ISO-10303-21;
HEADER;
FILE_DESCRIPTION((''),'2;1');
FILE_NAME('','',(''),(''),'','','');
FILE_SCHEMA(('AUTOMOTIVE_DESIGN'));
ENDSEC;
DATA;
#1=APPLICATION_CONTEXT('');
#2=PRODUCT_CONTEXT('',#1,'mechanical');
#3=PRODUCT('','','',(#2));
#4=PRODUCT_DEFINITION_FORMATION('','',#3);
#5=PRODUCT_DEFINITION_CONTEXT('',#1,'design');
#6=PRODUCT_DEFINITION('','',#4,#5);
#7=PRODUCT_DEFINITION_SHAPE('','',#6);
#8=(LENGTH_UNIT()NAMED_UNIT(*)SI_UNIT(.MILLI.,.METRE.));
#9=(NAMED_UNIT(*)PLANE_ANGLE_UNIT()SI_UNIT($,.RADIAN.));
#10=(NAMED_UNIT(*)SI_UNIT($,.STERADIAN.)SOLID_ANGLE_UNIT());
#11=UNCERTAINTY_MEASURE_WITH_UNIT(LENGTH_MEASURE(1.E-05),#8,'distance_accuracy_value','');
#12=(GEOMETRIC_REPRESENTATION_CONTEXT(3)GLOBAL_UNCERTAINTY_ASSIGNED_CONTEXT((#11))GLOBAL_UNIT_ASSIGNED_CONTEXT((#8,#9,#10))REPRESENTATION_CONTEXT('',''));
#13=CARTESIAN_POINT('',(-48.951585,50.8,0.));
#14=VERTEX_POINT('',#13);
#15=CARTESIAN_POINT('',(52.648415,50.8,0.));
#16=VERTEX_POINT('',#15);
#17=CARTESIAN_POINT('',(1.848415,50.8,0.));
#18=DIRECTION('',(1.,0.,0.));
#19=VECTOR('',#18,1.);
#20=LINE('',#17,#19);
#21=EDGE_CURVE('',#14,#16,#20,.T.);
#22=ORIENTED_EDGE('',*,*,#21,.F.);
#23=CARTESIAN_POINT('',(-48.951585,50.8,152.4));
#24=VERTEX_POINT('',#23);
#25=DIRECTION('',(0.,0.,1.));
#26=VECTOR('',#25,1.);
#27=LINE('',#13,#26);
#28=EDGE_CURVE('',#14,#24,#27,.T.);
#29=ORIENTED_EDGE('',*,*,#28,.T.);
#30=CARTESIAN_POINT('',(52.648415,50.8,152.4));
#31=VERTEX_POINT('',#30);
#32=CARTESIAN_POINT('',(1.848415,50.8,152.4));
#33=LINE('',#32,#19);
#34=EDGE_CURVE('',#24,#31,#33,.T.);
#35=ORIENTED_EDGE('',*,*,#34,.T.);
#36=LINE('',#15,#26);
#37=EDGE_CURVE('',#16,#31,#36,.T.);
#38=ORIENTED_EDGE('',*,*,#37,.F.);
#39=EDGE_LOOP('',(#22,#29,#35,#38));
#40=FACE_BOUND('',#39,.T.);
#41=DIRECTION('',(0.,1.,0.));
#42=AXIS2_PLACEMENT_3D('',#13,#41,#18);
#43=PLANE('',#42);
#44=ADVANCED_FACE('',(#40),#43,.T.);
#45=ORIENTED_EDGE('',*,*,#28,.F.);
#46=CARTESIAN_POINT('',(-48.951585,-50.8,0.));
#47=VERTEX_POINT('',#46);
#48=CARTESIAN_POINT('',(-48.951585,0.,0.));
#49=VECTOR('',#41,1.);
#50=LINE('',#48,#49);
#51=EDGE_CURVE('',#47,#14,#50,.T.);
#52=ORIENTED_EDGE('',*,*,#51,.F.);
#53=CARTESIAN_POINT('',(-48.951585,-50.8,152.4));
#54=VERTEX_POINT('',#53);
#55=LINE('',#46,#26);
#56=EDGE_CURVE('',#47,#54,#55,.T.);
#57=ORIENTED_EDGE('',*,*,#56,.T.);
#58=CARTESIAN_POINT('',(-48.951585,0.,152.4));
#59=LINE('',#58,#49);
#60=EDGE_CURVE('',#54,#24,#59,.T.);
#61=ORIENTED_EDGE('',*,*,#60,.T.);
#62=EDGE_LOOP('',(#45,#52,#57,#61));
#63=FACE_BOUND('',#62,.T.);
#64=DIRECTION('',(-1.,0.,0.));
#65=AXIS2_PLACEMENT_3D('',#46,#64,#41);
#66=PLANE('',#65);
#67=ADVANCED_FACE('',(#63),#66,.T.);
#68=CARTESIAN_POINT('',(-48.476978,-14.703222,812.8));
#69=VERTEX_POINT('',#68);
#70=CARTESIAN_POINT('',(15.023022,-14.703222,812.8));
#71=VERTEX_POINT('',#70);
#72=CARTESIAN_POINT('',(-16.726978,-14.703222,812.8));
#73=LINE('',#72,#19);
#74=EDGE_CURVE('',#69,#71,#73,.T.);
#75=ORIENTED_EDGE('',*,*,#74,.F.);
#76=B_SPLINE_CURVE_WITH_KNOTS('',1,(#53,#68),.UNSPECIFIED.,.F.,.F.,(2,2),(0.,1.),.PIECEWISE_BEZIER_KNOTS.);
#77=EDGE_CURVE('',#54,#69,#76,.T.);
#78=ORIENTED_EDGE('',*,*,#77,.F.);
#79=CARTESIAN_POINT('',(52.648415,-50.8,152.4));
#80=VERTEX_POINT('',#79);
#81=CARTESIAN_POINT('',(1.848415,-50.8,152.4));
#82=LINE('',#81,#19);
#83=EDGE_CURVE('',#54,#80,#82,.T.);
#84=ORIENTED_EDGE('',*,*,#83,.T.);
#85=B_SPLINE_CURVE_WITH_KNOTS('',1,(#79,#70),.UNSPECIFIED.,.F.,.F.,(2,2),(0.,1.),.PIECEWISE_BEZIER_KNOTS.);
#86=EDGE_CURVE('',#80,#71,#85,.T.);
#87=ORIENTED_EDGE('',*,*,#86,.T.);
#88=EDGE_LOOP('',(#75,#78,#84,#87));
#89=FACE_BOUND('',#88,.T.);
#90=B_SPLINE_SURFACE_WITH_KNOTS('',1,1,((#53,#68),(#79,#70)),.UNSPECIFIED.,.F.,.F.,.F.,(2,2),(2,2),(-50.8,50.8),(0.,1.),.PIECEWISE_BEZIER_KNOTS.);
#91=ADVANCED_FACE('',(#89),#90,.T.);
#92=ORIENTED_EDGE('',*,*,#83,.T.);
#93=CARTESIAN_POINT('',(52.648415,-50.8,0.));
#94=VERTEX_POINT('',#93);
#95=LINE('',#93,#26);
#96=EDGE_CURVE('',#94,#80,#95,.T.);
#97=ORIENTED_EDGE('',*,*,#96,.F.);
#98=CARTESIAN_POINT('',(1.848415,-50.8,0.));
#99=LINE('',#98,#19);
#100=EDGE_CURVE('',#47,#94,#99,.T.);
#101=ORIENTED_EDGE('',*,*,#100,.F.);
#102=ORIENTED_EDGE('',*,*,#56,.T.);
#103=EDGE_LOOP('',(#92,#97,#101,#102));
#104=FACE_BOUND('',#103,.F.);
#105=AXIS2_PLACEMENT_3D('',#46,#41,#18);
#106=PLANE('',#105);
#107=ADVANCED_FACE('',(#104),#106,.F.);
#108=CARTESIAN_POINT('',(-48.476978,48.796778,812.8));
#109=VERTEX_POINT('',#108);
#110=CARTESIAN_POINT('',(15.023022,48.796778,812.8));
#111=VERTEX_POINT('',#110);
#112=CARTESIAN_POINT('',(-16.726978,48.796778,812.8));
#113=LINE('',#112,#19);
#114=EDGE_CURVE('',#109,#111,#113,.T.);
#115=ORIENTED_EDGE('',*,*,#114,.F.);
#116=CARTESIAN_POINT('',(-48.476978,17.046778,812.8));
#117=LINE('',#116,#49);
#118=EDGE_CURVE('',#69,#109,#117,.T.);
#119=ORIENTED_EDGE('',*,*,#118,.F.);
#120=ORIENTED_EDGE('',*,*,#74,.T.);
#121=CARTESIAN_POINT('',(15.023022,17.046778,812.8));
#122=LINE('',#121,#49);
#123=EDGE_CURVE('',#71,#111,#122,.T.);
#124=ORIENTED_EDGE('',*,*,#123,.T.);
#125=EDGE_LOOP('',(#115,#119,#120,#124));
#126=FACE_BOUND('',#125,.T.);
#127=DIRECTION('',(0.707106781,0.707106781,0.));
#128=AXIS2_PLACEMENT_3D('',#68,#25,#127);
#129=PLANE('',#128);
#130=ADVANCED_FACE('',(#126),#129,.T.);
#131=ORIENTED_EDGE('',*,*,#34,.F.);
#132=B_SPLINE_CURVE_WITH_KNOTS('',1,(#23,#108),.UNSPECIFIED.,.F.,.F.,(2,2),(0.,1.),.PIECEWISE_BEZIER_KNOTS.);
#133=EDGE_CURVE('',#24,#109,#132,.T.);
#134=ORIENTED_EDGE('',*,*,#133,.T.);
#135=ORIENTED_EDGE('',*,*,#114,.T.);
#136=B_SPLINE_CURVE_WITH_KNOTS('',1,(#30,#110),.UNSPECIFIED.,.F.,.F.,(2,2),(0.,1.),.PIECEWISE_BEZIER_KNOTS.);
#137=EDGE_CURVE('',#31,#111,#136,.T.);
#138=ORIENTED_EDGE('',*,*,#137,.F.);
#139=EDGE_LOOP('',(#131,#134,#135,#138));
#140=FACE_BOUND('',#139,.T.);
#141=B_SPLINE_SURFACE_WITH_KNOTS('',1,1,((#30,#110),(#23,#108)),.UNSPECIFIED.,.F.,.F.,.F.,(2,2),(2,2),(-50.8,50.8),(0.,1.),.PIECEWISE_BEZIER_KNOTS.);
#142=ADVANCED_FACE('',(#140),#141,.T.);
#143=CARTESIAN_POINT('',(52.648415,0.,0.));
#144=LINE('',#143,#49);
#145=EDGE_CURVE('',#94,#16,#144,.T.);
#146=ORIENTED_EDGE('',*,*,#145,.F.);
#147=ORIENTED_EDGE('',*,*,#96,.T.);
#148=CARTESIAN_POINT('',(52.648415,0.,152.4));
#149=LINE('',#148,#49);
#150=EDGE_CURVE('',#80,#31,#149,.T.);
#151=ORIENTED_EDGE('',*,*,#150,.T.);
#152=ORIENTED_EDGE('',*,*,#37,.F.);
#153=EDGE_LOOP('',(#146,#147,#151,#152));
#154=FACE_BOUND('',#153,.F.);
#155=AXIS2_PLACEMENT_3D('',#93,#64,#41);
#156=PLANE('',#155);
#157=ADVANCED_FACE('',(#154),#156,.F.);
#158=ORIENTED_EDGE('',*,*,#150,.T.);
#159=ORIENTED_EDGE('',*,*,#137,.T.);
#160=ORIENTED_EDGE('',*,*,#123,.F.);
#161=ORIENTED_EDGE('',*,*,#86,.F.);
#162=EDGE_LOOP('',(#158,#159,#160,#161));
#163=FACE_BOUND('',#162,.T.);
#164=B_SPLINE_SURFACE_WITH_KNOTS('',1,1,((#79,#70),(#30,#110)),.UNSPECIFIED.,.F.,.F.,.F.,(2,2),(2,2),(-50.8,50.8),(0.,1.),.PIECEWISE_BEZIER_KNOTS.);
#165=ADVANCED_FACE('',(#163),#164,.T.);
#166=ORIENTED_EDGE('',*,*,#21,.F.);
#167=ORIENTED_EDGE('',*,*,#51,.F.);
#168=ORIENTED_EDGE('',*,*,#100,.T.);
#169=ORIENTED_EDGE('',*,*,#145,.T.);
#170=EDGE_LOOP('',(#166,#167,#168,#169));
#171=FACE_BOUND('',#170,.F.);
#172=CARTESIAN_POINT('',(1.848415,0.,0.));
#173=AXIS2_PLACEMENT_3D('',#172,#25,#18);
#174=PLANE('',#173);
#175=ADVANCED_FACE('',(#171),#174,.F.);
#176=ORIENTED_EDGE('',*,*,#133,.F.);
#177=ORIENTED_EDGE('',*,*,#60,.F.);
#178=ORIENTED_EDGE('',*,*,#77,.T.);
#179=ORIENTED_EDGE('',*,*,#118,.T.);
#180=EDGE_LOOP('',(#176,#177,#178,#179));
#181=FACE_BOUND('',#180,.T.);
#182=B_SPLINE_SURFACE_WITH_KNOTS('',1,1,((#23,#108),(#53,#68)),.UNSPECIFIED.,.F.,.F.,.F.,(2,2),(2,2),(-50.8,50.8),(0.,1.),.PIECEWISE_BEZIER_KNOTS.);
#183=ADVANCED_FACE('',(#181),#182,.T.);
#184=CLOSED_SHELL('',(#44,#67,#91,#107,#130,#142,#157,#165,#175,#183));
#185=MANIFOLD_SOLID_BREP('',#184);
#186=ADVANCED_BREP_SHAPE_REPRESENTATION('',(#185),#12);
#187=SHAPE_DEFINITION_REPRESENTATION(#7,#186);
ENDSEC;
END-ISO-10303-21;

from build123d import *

# Parameters (mm, degrees)
F0_W      = 101.6
F0_H      = 101.6
F1_DEPTH  = 152.4
F1_FACE_W = 101.6
F1_FACE_H = 101.6
F3_W      = 63.5
F3_H      = 63.5


with BuildPart() as f1:
    # F0 (on Top) → F1 (new body)
    with BuildSketch(Plane.XY):
        with Locations((1.8484146567, 0)):
            Rectangle(F0_W, F0_H)
    extrude(amount=F1_DEPTH)

    # F1_face (on face) → F4 section 0
    with BuildSketch(Plane(origin=(1.8484146567, 0, 152.4), x_dir=(1, 0, 0), z_dir=(0, 0, 1))):
        Rectangle(F1_FACE_W, F1_FACE_H)
    # F3 (on offset) → F4 section 1
    with BuildSketch(Plane.XY.offset(812.8)):
        with Locations((-16.7269780412, 17.0467783809)):
            Rectangle(F3_W, F3_H)
    loft()


solid = f1.part
